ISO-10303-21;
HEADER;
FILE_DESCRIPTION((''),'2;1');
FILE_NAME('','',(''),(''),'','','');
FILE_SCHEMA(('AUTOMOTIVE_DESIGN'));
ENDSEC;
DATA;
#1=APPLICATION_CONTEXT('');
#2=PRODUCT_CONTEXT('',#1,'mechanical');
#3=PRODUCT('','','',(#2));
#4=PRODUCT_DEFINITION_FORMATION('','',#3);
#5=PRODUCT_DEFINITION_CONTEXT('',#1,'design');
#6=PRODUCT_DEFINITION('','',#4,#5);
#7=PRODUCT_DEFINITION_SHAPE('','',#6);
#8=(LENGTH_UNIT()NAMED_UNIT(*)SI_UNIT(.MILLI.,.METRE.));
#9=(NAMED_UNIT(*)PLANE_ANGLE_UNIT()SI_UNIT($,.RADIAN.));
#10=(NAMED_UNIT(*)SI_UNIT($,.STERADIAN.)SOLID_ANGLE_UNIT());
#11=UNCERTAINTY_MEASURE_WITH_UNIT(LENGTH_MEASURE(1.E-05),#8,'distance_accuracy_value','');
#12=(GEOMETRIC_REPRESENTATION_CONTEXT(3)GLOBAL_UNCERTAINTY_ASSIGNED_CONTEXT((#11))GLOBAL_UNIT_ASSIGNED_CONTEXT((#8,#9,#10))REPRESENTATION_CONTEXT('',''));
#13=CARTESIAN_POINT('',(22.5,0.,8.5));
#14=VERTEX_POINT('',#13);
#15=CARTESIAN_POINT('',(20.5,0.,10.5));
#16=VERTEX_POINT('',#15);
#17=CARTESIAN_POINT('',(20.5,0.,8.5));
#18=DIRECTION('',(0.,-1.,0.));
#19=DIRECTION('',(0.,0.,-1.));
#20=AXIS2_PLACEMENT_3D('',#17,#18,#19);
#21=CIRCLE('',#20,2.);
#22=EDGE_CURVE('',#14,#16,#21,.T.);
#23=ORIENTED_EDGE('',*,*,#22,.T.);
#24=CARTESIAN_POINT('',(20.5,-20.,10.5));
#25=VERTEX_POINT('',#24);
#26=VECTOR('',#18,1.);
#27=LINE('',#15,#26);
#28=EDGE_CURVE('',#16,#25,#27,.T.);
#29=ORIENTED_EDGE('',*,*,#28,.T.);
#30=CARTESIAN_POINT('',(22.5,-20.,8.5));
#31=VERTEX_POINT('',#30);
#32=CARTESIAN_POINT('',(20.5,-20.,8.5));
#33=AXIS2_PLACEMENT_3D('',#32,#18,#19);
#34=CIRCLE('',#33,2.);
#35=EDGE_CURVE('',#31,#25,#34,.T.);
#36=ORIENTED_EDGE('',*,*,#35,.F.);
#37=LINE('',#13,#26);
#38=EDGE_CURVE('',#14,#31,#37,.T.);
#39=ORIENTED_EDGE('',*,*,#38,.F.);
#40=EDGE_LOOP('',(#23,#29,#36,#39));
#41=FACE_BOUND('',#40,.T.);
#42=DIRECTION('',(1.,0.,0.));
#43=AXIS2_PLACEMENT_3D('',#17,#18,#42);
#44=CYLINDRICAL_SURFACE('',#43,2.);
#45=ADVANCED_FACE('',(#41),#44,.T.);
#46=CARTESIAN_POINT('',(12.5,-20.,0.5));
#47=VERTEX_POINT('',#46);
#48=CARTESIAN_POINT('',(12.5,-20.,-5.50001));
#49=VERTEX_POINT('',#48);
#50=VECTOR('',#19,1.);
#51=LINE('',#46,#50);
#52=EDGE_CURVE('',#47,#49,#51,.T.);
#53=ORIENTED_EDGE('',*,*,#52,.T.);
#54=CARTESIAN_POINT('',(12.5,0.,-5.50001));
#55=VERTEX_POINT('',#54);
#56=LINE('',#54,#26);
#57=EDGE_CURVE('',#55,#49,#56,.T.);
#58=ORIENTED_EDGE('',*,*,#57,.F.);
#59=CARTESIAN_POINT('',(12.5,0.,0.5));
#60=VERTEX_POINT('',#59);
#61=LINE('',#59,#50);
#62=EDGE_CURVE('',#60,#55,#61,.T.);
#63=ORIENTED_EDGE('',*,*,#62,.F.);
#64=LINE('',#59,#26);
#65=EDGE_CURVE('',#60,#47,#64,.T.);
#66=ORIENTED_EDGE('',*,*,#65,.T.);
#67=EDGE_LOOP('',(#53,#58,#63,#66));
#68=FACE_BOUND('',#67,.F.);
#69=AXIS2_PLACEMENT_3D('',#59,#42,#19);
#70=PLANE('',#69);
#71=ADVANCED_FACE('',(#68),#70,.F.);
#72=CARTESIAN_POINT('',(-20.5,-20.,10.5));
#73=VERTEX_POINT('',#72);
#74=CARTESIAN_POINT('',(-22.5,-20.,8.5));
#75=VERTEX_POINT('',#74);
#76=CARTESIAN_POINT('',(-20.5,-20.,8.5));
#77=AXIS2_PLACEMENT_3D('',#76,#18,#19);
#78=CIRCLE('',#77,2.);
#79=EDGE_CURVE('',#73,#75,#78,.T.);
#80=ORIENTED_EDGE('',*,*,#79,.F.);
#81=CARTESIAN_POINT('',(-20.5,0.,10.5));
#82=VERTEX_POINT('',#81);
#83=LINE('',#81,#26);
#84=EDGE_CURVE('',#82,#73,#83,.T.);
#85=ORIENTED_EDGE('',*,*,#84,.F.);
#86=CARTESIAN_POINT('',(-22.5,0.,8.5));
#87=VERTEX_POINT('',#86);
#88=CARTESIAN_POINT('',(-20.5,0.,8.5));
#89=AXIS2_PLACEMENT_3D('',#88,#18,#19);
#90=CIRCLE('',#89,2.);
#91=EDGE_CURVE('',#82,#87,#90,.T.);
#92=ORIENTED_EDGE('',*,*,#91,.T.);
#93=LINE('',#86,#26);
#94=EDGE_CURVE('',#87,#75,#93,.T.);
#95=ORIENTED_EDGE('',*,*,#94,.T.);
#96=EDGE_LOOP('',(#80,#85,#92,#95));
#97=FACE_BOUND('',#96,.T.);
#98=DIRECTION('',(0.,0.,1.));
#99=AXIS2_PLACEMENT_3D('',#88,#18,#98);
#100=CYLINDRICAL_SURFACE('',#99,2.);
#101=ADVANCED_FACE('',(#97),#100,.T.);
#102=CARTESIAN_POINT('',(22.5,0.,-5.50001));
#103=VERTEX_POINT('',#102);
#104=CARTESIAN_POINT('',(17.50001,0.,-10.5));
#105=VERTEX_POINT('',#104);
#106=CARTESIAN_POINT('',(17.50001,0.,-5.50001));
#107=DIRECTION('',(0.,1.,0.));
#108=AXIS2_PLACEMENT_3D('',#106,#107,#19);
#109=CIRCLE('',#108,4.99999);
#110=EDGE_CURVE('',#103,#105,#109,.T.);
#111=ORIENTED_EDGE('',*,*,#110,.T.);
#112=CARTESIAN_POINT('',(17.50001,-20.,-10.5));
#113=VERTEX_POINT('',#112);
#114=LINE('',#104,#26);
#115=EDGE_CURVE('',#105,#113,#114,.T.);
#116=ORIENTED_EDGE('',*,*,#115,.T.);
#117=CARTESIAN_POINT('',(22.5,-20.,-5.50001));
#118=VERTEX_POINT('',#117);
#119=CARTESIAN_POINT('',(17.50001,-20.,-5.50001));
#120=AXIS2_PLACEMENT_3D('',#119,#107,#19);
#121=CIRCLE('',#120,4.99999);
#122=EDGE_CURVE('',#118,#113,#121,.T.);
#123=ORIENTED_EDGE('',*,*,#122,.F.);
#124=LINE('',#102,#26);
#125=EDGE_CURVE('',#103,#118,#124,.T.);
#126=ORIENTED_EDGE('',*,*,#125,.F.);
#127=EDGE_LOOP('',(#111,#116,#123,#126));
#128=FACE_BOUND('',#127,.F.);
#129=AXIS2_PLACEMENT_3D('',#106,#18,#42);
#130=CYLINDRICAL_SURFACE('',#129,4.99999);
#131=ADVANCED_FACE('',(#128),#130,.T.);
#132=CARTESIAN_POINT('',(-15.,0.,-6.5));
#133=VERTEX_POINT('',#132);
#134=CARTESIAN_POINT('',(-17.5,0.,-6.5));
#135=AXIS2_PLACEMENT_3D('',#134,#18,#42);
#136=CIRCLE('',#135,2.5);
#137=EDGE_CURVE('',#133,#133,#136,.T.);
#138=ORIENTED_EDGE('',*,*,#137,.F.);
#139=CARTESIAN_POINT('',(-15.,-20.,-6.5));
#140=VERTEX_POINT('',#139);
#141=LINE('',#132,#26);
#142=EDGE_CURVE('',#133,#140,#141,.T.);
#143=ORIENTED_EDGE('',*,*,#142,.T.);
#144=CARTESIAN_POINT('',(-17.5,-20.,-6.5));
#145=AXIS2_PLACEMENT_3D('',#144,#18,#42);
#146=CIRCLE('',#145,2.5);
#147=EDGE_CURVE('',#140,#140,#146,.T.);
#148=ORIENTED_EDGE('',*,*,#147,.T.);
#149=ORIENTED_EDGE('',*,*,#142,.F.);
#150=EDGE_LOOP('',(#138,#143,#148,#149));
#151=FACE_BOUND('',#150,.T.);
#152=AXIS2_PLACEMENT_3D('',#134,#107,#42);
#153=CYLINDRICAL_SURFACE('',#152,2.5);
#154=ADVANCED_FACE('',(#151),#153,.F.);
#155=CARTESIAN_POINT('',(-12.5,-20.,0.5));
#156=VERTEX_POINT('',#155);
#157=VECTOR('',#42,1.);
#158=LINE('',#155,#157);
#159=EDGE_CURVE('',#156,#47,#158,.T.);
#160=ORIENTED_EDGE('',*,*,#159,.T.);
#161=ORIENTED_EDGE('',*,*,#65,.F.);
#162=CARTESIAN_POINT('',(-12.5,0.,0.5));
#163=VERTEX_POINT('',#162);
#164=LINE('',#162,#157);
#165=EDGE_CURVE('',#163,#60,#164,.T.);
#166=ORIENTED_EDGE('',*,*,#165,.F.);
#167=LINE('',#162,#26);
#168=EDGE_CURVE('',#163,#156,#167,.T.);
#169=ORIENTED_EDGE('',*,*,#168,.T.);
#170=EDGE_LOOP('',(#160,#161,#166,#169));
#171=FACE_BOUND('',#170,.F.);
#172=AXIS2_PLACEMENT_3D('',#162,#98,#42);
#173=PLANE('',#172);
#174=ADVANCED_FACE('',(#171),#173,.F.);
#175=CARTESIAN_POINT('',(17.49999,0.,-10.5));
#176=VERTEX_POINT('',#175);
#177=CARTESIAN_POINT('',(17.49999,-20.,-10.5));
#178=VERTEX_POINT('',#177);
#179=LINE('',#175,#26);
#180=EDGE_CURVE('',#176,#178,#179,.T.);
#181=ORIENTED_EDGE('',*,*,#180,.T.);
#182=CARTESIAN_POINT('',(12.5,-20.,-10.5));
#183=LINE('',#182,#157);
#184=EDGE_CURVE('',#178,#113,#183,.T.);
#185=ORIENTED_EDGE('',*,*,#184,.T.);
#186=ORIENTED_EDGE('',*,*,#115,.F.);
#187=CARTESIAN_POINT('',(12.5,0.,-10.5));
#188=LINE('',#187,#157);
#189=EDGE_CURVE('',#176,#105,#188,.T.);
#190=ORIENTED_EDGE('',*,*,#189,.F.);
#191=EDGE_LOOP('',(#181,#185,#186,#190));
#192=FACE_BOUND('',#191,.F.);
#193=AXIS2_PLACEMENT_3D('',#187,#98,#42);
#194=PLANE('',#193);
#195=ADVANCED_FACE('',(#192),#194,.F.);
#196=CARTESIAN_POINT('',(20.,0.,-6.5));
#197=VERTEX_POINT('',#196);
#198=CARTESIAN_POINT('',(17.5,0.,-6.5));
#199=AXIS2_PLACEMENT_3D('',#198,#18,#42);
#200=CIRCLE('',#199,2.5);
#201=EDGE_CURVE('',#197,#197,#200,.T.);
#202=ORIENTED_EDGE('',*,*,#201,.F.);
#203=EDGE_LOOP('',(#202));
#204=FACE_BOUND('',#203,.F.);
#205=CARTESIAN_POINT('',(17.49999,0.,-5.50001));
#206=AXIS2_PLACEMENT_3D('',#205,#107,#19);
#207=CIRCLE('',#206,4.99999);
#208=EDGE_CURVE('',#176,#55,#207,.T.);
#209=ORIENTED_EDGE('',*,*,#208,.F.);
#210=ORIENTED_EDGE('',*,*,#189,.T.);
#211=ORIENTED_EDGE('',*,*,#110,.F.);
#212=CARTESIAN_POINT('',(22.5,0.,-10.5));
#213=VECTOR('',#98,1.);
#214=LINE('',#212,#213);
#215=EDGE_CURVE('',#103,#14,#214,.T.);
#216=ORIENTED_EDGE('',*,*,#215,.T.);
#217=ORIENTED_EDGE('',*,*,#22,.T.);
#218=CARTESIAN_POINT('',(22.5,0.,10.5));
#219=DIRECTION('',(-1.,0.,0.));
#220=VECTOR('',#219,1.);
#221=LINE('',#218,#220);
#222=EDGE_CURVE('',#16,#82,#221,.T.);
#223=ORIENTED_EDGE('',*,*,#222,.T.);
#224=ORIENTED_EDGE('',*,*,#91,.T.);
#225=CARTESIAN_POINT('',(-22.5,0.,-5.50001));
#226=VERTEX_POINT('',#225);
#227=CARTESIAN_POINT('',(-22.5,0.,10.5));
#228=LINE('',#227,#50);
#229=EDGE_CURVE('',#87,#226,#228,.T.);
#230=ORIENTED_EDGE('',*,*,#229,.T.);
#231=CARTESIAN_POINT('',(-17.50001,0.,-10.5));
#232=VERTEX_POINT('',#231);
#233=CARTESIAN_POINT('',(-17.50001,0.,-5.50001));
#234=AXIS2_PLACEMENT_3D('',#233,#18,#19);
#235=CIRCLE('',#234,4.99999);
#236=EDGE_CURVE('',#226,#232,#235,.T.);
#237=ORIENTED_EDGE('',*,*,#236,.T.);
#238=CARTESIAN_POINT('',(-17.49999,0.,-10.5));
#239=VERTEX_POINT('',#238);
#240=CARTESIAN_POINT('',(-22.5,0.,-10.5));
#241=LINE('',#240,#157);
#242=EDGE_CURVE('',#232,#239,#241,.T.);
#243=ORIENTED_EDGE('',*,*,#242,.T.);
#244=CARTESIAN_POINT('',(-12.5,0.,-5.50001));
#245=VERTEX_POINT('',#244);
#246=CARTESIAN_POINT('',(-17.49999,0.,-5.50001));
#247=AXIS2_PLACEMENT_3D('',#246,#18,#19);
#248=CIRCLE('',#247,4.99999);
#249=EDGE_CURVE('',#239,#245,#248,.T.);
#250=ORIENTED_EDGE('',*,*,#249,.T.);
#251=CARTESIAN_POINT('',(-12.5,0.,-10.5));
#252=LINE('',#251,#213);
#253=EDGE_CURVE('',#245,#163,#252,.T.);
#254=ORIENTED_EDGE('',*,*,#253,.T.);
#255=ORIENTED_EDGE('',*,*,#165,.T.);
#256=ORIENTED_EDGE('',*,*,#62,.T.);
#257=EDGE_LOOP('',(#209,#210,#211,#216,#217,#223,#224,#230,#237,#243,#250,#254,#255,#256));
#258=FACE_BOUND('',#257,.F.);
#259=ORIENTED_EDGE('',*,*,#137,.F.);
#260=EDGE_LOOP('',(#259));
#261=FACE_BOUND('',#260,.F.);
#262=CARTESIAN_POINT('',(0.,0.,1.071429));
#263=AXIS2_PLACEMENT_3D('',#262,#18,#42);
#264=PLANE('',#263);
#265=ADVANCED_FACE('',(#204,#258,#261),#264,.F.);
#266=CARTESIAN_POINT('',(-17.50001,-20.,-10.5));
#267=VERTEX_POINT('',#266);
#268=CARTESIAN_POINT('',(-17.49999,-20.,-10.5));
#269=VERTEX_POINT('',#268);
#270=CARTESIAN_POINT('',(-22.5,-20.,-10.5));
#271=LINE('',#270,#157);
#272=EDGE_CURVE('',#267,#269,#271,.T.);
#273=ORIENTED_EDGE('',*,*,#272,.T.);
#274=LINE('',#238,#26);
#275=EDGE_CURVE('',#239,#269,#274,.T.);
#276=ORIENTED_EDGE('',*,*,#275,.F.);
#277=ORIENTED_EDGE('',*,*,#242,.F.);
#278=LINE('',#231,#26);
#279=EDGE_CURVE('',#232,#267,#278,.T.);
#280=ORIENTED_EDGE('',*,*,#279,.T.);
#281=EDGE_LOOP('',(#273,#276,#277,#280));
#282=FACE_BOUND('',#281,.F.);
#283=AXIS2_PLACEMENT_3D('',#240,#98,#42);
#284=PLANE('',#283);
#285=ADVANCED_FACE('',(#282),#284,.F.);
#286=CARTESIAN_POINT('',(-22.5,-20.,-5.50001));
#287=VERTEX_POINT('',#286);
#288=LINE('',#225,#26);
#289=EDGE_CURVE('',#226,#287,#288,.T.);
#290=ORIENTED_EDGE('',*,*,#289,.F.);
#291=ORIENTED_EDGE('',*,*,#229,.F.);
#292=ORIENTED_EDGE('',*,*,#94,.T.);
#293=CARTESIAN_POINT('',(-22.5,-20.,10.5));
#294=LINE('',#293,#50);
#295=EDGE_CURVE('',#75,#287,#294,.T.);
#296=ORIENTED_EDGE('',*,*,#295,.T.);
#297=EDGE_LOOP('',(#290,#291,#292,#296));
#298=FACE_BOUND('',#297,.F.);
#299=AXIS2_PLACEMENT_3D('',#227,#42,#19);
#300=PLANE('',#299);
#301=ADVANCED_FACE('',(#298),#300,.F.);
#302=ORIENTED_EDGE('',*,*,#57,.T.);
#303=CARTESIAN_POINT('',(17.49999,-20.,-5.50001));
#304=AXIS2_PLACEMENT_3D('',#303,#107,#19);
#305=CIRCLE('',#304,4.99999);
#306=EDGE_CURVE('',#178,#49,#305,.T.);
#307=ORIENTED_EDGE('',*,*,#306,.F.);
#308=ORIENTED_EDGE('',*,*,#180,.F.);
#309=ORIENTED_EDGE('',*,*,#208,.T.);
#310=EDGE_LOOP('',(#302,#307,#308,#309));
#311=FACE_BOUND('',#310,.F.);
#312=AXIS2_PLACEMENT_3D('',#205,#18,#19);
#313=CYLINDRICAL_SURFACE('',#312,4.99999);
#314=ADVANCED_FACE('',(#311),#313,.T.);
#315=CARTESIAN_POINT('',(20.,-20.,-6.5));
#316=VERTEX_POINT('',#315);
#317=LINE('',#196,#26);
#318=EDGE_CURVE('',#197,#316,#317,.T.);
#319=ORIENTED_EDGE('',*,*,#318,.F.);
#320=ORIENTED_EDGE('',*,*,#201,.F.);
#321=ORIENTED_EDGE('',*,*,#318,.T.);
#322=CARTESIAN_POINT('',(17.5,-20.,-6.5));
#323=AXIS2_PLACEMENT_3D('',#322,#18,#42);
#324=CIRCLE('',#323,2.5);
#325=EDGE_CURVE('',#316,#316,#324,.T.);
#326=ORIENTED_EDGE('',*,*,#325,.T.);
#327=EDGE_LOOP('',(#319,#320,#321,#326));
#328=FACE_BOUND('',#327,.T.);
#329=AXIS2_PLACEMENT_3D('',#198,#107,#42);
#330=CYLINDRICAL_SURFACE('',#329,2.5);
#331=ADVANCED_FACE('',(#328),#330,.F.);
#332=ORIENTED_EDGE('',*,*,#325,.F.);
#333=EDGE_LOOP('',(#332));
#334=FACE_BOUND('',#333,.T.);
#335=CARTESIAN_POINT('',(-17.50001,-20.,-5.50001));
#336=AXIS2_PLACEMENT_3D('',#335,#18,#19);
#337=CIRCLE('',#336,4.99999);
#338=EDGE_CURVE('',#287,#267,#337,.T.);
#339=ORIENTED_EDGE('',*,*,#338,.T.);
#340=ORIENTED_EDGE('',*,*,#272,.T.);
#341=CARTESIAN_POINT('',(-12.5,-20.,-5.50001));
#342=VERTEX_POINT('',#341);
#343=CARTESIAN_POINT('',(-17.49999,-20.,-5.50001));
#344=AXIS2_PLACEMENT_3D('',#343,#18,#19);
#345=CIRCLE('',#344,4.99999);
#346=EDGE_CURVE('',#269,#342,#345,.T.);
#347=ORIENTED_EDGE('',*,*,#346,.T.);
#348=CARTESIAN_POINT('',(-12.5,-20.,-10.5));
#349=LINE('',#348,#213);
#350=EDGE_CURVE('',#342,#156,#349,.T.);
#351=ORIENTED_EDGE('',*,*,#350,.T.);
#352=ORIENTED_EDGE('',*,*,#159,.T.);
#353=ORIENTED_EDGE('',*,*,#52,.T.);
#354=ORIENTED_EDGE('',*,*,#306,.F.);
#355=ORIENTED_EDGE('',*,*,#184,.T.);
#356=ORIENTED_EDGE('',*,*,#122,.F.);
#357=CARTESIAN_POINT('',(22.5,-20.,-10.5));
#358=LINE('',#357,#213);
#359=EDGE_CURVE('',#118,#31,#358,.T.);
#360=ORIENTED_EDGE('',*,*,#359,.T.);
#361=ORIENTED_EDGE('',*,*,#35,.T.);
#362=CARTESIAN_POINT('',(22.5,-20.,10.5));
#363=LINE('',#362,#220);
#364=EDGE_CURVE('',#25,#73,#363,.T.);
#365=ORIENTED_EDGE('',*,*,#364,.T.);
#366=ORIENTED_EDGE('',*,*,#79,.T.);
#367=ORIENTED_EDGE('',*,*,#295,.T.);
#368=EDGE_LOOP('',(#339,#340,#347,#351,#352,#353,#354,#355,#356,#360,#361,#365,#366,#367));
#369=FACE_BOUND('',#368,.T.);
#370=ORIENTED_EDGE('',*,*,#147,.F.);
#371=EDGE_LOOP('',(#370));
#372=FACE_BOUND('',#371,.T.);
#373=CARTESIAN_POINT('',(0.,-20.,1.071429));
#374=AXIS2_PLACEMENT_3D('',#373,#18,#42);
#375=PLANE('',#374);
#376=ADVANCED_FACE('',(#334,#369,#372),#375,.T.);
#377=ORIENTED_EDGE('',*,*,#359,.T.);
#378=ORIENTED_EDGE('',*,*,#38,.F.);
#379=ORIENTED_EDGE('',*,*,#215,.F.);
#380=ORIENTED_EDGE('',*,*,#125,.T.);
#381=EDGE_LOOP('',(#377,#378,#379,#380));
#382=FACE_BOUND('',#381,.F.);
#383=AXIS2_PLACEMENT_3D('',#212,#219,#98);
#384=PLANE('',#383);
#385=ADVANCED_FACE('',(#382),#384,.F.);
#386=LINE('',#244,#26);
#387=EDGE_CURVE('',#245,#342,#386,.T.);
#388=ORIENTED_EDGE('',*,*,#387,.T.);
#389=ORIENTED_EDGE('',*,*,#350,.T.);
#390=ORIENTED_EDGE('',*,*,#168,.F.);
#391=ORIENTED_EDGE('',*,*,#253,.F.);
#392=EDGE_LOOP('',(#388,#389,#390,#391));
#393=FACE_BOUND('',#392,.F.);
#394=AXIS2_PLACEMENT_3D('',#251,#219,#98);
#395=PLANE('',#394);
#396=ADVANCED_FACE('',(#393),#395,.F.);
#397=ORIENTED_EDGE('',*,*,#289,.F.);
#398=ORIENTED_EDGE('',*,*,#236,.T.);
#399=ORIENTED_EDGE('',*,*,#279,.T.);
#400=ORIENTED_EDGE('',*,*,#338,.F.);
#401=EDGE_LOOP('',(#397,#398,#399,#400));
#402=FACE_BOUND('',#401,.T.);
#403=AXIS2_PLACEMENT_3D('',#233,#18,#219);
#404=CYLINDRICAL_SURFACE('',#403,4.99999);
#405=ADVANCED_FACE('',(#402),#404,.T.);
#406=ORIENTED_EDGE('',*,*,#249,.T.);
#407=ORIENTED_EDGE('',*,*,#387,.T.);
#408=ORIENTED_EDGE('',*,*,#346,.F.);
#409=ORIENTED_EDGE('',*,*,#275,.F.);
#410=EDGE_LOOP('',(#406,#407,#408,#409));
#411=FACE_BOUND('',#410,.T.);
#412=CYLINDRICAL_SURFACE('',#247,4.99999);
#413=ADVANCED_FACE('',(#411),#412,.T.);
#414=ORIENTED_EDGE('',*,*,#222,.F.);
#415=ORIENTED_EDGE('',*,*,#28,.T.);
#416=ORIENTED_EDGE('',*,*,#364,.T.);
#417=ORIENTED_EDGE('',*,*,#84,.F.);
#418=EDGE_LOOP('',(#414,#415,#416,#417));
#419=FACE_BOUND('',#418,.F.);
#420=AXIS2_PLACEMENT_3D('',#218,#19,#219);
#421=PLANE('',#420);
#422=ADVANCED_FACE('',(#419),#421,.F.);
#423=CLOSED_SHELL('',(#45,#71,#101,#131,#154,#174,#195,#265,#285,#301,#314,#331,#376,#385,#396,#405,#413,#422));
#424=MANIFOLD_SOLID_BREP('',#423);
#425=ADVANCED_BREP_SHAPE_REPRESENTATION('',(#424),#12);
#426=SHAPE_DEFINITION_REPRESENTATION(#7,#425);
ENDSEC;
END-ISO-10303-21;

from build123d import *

# Parameters (mm, degrees)
F0_R     = 2.5
F1_DEPTH = 20
F2_R     = 4.99999
F3_R     = 2


# Not quite as in the source:
# - a fillet or chamfer is up to 0.001 mm smaller than in the source, because OpenCascade refuses the exact size


with BuildPart() as f1:
    # F0 (on Front) → F1 (new body)
    with BuildSketch(Plane.XZ):
        Polygon((22.5, 10.5), (-22.5, 10.5), (-22.5, -10.5), (-12.5, -10.5), (-12.5, 0.5), (12.5, 0.5), (12.5, -10.5), (22.5, -10.5), align=None)
        with Locations((-17.5, -6.5)):
            Circle(F0_R, mode=Mode.SUBTRACT)
        with Locations((17.5, -6.5)):
            Circle(F0_R, mode=Mode.SUBTRACT)
    extrude(amount=F1_DEPTH)

    # F2 (radius 5 in the source; OpenCascade refuses exactly that, so slightly less here)
    f2_edges = [f1.edges().sort_by_distance(p)[0] for p in [
        (-22.5, -10, -10.5),
        (-12.5, -10, -10.5),
        (12.5, -10, -10.5),
        (22.5, -10, -10.5),
    ]]
    fillet(f2_edges, radius=F2_R)

    # F3
    f3_edges = [f1.edges().sort_by_distance(p)[0] for p in [
        (22.5, -10, 10.5),
        (-22.5, -10, 10.5),
    ]]
    fillet(f3_edges, radius=F3_R)


solid = f1.part
